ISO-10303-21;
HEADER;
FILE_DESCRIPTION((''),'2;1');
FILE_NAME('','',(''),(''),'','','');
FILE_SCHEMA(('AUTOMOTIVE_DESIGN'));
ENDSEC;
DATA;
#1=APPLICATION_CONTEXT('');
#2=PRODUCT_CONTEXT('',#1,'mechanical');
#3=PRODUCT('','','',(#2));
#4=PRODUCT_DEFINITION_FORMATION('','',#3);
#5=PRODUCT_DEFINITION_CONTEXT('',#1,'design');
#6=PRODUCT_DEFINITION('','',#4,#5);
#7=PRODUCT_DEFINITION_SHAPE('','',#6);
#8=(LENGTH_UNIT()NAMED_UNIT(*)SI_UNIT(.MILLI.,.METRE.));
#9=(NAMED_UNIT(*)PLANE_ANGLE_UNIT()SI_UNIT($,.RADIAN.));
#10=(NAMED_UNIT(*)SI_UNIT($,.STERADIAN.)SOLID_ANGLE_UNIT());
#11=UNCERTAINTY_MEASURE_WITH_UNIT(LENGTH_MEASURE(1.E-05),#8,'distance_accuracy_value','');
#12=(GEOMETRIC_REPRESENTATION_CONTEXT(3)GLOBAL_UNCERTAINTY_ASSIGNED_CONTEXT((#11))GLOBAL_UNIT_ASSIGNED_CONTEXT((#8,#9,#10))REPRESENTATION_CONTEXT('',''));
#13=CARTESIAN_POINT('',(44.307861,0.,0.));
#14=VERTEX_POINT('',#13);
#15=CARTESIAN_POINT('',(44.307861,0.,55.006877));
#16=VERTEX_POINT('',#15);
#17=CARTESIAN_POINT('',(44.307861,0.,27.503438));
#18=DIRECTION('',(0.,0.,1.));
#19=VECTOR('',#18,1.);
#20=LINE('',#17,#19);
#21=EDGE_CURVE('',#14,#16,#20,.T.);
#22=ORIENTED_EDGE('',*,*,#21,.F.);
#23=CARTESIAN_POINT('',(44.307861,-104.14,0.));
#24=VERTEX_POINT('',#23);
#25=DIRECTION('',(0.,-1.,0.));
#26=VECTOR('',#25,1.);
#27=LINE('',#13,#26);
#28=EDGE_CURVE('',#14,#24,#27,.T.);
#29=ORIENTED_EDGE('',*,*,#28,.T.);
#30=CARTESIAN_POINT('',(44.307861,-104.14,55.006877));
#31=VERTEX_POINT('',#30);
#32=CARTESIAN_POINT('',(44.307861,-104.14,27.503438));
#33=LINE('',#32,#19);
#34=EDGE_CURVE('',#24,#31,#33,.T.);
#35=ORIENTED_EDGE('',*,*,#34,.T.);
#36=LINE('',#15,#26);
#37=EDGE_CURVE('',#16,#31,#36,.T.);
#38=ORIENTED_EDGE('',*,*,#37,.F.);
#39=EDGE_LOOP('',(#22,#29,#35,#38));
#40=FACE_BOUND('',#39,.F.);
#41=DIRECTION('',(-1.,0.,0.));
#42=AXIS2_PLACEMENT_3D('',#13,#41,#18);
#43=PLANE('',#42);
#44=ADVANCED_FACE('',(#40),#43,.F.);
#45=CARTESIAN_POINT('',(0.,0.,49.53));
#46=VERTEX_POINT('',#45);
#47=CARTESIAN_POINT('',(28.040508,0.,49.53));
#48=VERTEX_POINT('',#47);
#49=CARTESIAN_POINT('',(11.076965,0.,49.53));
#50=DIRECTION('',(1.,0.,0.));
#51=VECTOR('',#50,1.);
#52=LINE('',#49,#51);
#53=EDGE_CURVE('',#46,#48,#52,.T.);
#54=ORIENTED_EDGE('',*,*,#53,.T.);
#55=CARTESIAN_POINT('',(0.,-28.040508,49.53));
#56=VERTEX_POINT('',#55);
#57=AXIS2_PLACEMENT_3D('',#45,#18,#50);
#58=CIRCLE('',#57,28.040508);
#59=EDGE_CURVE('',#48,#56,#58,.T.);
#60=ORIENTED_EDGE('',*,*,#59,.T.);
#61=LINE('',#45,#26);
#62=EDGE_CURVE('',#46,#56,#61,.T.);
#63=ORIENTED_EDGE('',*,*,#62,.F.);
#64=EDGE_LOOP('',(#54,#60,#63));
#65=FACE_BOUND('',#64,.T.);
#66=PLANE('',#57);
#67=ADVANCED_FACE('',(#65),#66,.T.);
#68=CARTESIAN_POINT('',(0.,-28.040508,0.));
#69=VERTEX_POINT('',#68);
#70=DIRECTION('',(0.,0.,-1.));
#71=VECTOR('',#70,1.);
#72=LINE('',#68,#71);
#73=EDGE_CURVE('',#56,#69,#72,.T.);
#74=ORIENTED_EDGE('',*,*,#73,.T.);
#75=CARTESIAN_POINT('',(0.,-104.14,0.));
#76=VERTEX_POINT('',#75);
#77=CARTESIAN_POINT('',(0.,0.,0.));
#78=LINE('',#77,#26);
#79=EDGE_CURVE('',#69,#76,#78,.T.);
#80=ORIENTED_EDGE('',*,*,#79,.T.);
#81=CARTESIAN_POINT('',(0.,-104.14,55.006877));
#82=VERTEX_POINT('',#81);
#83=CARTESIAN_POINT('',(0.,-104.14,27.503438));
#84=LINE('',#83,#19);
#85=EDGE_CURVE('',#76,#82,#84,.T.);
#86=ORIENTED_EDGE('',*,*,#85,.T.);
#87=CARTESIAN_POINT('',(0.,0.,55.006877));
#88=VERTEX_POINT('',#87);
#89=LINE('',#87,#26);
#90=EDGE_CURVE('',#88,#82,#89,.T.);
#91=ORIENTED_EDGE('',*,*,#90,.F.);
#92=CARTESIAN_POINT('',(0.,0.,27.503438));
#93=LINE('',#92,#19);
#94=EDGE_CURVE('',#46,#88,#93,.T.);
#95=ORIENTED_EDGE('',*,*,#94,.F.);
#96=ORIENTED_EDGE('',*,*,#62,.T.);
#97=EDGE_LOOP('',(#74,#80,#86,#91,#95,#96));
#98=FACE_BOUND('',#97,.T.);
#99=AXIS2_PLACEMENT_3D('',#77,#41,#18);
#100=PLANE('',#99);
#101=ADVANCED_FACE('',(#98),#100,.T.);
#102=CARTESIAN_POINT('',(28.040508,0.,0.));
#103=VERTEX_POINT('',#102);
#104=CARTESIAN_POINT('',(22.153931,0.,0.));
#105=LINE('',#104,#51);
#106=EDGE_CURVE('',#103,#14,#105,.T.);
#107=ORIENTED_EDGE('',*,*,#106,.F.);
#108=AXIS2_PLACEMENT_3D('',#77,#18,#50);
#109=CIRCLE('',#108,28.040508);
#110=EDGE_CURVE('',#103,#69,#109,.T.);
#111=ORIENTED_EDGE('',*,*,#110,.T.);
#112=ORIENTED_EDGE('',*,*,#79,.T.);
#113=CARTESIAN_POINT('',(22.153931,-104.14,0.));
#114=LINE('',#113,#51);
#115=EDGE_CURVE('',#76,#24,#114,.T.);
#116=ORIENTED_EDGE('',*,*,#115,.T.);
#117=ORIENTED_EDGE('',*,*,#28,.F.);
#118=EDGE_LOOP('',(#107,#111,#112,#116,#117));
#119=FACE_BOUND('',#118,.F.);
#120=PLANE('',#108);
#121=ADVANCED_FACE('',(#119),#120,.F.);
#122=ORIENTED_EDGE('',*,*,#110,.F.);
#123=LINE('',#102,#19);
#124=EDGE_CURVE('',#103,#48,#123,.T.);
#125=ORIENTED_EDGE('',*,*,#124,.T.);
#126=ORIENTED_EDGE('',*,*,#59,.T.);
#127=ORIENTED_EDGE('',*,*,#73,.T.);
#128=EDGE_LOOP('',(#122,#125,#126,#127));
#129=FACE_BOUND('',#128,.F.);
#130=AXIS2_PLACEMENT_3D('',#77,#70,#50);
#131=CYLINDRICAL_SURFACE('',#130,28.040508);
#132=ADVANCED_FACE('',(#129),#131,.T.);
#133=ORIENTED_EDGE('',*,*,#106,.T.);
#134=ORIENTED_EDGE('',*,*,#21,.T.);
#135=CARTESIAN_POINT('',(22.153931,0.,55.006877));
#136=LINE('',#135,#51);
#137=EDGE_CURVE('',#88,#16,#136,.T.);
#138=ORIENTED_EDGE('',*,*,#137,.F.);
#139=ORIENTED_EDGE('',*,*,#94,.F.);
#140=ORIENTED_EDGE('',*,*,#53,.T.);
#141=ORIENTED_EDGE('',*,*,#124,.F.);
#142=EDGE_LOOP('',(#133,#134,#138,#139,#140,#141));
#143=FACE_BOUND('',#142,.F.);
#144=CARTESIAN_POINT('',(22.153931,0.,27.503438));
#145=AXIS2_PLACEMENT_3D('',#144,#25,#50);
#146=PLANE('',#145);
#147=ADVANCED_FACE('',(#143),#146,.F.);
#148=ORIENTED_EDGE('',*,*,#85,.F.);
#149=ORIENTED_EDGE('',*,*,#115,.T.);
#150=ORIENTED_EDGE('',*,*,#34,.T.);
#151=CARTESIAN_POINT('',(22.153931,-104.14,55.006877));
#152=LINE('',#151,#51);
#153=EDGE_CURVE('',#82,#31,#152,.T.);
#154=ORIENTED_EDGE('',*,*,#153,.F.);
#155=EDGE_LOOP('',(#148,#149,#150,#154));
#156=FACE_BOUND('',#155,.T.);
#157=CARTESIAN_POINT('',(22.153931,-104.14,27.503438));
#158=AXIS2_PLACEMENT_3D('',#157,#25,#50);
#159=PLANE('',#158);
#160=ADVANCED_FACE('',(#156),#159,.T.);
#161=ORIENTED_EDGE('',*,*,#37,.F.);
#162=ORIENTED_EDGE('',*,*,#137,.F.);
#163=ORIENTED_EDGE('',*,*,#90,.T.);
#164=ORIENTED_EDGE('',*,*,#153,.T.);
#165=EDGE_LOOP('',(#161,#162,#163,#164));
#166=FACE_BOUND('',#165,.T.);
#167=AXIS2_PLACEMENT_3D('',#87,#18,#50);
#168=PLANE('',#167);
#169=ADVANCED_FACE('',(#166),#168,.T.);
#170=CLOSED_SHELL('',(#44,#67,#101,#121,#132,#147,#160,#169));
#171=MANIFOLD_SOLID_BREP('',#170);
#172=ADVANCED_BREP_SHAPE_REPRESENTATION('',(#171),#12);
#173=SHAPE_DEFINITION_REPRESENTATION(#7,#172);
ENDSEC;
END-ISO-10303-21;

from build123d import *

# Parameters (mm, degrees)
F0_R     = 28.0405076849
F1_DEPTH = 49.53
F2_W     = 44.3078614771
F2_H     = 55.0068765879
F3_DEPTH = 104.14


with BuildPart() as f1:
    # F0 (on Top) → F1 (new body)
    with BuildSketch(Plane.XY):
        Circle(F0_R)
    extrude(amount=F1_DEPTH)

    # F2 (on Front) → F3 (join)
    with BuildSketch(Plane.XZ):
        with Locations((22.1539307386, 27.5034382939)):
            Rectangle(F2_W, F2_H)
    extrude(amount=F3_DEPTH)


solid = f1.part
